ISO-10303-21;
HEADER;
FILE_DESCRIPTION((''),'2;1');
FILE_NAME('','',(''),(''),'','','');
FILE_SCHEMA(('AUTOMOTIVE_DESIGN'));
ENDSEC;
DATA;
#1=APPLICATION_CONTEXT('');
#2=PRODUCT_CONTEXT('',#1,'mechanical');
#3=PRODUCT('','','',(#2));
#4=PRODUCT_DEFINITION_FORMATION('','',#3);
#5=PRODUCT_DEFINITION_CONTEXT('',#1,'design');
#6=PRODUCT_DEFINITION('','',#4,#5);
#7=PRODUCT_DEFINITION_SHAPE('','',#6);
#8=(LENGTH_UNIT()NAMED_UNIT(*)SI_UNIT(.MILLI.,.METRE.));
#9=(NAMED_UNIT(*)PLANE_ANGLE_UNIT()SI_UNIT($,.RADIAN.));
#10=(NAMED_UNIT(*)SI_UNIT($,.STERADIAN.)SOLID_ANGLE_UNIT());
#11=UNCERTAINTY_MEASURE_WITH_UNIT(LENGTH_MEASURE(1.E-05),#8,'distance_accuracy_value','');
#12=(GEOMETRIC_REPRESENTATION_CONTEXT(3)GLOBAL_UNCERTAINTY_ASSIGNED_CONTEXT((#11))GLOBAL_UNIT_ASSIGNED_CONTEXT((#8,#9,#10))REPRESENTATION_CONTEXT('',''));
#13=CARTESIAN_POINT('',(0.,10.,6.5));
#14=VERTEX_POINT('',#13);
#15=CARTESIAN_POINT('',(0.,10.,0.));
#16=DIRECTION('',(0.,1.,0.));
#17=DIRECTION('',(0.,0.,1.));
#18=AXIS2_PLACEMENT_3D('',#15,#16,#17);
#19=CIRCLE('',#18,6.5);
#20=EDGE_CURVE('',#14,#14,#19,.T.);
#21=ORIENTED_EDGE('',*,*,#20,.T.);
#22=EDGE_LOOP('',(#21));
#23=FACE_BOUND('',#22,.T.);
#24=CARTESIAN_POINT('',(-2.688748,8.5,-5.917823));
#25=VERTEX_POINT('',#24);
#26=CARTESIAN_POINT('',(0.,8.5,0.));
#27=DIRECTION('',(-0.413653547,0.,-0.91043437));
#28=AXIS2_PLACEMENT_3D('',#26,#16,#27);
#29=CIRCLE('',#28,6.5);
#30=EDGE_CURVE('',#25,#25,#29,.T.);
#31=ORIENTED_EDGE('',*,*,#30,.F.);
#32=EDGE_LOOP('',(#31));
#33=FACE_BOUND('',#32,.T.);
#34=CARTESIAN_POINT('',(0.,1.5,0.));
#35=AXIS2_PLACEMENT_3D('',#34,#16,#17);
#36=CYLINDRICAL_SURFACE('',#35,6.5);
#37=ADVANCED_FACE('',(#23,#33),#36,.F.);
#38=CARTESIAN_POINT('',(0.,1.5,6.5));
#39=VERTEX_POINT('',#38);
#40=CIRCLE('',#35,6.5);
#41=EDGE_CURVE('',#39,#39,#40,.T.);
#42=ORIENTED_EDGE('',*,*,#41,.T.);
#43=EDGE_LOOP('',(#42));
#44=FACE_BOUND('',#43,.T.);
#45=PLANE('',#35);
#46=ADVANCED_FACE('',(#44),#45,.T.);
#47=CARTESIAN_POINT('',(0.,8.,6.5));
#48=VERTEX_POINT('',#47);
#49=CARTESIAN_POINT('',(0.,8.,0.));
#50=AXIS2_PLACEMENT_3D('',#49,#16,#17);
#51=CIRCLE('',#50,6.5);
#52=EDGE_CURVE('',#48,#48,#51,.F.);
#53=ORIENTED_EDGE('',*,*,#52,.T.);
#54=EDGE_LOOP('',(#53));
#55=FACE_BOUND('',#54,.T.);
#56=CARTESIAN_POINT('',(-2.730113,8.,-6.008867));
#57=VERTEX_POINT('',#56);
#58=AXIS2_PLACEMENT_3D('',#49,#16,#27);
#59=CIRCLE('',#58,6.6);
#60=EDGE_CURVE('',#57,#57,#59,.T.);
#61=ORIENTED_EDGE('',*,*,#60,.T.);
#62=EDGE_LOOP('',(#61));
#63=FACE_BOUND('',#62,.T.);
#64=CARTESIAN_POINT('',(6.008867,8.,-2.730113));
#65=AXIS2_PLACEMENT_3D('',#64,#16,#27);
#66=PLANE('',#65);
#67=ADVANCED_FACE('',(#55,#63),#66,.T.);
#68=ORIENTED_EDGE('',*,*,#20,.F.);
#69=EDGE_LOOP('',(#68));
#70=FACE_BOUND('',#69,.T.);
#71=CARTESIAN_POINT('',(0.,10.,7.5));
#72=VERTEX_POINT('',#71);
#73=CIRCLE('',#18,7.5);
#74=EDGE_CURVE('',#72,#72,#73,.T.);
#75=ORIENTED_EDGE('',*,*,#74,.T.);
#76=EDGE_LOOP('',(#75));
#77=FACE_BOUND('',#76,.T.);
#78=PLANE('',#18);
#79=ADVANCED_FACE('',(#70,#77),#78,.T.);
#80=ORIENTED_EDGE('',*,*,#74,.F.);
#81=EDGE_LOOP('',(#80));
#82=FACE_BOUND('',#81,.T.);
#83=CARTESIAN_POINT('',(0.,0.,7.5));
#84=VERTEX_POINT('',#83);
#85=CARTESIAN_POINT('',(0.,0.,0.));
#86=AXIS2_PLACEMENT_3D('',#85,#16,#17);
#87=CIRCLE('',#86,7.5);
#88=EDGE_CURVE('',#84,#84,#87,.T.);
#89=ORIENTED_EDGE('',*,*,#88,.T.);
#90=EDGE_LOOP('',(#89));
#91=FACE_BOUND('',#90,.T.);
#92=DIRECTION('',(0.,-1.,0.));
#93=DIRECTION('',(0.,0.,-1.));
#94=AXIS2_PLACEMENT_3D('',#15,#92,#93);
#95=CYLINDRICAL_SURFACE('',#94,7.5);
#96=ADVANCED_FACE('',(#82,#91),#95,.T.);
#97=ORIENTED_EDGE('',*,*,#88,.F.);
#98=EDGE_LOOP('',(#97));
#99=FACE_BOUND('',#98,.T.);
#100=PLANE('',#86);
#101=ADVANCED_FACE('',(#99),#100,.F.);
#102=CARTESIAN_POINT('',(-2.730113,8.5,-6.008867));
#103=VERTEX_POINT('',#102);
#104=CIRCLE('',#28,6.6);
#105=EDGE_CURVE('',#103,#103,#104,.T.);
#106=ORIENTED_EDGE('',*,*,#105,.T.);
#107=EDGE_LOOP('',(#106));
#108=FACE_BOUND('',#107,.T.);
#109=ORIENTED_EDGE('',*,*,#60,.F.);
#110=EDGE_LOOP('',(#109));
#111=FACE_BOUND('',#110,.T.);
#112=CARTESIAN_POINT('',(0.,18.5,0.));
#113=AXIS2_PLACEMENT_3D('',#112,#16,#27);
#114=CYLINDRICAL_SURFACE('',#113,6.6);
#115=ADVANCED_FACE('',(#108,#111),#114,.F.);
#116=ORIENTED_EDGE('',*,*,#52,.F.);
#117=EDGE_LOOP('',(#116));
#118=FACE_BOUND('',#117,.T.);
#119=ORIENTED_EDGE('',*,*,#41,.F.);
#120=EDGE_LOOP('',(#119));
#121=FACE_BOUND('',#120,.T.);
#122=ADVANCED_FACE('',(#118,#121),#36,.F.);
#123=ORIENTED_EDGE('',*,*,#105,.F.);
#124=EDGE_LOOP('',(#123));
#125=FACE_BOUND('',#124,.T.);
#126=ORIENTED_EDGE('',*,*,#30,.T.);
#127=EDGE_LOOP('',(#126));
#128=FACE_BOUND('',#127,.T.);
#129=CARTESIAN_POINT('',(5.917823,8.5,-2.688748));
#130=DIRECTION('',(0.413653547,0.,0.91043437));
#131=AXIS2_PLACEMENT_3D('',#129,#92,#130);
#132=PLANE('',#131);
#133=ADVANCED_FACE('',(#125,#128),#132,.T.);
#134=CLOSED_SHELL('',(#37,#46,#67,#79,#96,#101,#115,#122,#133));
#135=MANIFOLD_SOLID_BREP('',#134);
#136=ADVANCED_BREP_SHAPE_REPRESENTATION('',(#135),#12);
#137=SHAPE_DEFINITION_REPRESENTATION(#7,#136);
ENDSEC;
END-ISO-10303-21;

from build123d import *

# Parameters (mm, degrees)
SKETCH1_R           = 7.5
BOSS_EXTRUDE1_DEPTH = 10
SKETCH2_R           = 6.5
CUT_EXTRUDE1_DEPTH  = 8.5
CAVITY1_START       = 8
CAVITY1_OUTLINE_R   = 6.6
CAVITY1_DEPTH       = 0.5


# Read off the part's stored shape, not the designer's step: Cavity1
with BuildPart() as part:
    # Sketch1 → Boss-Extrude1 (new body)
    with BuildSketch(Plane(origin=(0, 0, 0), x_dir=(1, 0, 0), z_dir=(0, 1, 0))):
        with Locations(Location((0, 0, 0), (0, 0, 270))):
            Circle(SKETCH1_R)
    extrude(amount=BOSS_EXTRUDE1_DEPTH)

    # Sketch2 → Cut-Extrude1 (cut)
    with BuildSketch(Plane(origin=(0, 10, 0), x_dir=(1, 0, 0), z_dir=(0, 1, 0))):
        with Locations(Location((0, 0, 0), (0, 0, 270))):
            Circle(SKETCH2_R)
    extrude(amount=-CUT_EXTRUDE1_DEPTH, mode=Mode.SUBTRACT)

    # Cavity1 outline → Cavity1 (cut)
    with BuildSketch(Plane(origin=(0, 0, 0), x_dir=(1, 0, 0), z_dir=(0, 1, 0)).offset(CAVITY1_START)):
        Circle(CAVITY1_OUTLINE_R)
    extrude(amount=CAVITY1_DEPTH, mode=Mode.SUBTRACT)


solid = part.part
